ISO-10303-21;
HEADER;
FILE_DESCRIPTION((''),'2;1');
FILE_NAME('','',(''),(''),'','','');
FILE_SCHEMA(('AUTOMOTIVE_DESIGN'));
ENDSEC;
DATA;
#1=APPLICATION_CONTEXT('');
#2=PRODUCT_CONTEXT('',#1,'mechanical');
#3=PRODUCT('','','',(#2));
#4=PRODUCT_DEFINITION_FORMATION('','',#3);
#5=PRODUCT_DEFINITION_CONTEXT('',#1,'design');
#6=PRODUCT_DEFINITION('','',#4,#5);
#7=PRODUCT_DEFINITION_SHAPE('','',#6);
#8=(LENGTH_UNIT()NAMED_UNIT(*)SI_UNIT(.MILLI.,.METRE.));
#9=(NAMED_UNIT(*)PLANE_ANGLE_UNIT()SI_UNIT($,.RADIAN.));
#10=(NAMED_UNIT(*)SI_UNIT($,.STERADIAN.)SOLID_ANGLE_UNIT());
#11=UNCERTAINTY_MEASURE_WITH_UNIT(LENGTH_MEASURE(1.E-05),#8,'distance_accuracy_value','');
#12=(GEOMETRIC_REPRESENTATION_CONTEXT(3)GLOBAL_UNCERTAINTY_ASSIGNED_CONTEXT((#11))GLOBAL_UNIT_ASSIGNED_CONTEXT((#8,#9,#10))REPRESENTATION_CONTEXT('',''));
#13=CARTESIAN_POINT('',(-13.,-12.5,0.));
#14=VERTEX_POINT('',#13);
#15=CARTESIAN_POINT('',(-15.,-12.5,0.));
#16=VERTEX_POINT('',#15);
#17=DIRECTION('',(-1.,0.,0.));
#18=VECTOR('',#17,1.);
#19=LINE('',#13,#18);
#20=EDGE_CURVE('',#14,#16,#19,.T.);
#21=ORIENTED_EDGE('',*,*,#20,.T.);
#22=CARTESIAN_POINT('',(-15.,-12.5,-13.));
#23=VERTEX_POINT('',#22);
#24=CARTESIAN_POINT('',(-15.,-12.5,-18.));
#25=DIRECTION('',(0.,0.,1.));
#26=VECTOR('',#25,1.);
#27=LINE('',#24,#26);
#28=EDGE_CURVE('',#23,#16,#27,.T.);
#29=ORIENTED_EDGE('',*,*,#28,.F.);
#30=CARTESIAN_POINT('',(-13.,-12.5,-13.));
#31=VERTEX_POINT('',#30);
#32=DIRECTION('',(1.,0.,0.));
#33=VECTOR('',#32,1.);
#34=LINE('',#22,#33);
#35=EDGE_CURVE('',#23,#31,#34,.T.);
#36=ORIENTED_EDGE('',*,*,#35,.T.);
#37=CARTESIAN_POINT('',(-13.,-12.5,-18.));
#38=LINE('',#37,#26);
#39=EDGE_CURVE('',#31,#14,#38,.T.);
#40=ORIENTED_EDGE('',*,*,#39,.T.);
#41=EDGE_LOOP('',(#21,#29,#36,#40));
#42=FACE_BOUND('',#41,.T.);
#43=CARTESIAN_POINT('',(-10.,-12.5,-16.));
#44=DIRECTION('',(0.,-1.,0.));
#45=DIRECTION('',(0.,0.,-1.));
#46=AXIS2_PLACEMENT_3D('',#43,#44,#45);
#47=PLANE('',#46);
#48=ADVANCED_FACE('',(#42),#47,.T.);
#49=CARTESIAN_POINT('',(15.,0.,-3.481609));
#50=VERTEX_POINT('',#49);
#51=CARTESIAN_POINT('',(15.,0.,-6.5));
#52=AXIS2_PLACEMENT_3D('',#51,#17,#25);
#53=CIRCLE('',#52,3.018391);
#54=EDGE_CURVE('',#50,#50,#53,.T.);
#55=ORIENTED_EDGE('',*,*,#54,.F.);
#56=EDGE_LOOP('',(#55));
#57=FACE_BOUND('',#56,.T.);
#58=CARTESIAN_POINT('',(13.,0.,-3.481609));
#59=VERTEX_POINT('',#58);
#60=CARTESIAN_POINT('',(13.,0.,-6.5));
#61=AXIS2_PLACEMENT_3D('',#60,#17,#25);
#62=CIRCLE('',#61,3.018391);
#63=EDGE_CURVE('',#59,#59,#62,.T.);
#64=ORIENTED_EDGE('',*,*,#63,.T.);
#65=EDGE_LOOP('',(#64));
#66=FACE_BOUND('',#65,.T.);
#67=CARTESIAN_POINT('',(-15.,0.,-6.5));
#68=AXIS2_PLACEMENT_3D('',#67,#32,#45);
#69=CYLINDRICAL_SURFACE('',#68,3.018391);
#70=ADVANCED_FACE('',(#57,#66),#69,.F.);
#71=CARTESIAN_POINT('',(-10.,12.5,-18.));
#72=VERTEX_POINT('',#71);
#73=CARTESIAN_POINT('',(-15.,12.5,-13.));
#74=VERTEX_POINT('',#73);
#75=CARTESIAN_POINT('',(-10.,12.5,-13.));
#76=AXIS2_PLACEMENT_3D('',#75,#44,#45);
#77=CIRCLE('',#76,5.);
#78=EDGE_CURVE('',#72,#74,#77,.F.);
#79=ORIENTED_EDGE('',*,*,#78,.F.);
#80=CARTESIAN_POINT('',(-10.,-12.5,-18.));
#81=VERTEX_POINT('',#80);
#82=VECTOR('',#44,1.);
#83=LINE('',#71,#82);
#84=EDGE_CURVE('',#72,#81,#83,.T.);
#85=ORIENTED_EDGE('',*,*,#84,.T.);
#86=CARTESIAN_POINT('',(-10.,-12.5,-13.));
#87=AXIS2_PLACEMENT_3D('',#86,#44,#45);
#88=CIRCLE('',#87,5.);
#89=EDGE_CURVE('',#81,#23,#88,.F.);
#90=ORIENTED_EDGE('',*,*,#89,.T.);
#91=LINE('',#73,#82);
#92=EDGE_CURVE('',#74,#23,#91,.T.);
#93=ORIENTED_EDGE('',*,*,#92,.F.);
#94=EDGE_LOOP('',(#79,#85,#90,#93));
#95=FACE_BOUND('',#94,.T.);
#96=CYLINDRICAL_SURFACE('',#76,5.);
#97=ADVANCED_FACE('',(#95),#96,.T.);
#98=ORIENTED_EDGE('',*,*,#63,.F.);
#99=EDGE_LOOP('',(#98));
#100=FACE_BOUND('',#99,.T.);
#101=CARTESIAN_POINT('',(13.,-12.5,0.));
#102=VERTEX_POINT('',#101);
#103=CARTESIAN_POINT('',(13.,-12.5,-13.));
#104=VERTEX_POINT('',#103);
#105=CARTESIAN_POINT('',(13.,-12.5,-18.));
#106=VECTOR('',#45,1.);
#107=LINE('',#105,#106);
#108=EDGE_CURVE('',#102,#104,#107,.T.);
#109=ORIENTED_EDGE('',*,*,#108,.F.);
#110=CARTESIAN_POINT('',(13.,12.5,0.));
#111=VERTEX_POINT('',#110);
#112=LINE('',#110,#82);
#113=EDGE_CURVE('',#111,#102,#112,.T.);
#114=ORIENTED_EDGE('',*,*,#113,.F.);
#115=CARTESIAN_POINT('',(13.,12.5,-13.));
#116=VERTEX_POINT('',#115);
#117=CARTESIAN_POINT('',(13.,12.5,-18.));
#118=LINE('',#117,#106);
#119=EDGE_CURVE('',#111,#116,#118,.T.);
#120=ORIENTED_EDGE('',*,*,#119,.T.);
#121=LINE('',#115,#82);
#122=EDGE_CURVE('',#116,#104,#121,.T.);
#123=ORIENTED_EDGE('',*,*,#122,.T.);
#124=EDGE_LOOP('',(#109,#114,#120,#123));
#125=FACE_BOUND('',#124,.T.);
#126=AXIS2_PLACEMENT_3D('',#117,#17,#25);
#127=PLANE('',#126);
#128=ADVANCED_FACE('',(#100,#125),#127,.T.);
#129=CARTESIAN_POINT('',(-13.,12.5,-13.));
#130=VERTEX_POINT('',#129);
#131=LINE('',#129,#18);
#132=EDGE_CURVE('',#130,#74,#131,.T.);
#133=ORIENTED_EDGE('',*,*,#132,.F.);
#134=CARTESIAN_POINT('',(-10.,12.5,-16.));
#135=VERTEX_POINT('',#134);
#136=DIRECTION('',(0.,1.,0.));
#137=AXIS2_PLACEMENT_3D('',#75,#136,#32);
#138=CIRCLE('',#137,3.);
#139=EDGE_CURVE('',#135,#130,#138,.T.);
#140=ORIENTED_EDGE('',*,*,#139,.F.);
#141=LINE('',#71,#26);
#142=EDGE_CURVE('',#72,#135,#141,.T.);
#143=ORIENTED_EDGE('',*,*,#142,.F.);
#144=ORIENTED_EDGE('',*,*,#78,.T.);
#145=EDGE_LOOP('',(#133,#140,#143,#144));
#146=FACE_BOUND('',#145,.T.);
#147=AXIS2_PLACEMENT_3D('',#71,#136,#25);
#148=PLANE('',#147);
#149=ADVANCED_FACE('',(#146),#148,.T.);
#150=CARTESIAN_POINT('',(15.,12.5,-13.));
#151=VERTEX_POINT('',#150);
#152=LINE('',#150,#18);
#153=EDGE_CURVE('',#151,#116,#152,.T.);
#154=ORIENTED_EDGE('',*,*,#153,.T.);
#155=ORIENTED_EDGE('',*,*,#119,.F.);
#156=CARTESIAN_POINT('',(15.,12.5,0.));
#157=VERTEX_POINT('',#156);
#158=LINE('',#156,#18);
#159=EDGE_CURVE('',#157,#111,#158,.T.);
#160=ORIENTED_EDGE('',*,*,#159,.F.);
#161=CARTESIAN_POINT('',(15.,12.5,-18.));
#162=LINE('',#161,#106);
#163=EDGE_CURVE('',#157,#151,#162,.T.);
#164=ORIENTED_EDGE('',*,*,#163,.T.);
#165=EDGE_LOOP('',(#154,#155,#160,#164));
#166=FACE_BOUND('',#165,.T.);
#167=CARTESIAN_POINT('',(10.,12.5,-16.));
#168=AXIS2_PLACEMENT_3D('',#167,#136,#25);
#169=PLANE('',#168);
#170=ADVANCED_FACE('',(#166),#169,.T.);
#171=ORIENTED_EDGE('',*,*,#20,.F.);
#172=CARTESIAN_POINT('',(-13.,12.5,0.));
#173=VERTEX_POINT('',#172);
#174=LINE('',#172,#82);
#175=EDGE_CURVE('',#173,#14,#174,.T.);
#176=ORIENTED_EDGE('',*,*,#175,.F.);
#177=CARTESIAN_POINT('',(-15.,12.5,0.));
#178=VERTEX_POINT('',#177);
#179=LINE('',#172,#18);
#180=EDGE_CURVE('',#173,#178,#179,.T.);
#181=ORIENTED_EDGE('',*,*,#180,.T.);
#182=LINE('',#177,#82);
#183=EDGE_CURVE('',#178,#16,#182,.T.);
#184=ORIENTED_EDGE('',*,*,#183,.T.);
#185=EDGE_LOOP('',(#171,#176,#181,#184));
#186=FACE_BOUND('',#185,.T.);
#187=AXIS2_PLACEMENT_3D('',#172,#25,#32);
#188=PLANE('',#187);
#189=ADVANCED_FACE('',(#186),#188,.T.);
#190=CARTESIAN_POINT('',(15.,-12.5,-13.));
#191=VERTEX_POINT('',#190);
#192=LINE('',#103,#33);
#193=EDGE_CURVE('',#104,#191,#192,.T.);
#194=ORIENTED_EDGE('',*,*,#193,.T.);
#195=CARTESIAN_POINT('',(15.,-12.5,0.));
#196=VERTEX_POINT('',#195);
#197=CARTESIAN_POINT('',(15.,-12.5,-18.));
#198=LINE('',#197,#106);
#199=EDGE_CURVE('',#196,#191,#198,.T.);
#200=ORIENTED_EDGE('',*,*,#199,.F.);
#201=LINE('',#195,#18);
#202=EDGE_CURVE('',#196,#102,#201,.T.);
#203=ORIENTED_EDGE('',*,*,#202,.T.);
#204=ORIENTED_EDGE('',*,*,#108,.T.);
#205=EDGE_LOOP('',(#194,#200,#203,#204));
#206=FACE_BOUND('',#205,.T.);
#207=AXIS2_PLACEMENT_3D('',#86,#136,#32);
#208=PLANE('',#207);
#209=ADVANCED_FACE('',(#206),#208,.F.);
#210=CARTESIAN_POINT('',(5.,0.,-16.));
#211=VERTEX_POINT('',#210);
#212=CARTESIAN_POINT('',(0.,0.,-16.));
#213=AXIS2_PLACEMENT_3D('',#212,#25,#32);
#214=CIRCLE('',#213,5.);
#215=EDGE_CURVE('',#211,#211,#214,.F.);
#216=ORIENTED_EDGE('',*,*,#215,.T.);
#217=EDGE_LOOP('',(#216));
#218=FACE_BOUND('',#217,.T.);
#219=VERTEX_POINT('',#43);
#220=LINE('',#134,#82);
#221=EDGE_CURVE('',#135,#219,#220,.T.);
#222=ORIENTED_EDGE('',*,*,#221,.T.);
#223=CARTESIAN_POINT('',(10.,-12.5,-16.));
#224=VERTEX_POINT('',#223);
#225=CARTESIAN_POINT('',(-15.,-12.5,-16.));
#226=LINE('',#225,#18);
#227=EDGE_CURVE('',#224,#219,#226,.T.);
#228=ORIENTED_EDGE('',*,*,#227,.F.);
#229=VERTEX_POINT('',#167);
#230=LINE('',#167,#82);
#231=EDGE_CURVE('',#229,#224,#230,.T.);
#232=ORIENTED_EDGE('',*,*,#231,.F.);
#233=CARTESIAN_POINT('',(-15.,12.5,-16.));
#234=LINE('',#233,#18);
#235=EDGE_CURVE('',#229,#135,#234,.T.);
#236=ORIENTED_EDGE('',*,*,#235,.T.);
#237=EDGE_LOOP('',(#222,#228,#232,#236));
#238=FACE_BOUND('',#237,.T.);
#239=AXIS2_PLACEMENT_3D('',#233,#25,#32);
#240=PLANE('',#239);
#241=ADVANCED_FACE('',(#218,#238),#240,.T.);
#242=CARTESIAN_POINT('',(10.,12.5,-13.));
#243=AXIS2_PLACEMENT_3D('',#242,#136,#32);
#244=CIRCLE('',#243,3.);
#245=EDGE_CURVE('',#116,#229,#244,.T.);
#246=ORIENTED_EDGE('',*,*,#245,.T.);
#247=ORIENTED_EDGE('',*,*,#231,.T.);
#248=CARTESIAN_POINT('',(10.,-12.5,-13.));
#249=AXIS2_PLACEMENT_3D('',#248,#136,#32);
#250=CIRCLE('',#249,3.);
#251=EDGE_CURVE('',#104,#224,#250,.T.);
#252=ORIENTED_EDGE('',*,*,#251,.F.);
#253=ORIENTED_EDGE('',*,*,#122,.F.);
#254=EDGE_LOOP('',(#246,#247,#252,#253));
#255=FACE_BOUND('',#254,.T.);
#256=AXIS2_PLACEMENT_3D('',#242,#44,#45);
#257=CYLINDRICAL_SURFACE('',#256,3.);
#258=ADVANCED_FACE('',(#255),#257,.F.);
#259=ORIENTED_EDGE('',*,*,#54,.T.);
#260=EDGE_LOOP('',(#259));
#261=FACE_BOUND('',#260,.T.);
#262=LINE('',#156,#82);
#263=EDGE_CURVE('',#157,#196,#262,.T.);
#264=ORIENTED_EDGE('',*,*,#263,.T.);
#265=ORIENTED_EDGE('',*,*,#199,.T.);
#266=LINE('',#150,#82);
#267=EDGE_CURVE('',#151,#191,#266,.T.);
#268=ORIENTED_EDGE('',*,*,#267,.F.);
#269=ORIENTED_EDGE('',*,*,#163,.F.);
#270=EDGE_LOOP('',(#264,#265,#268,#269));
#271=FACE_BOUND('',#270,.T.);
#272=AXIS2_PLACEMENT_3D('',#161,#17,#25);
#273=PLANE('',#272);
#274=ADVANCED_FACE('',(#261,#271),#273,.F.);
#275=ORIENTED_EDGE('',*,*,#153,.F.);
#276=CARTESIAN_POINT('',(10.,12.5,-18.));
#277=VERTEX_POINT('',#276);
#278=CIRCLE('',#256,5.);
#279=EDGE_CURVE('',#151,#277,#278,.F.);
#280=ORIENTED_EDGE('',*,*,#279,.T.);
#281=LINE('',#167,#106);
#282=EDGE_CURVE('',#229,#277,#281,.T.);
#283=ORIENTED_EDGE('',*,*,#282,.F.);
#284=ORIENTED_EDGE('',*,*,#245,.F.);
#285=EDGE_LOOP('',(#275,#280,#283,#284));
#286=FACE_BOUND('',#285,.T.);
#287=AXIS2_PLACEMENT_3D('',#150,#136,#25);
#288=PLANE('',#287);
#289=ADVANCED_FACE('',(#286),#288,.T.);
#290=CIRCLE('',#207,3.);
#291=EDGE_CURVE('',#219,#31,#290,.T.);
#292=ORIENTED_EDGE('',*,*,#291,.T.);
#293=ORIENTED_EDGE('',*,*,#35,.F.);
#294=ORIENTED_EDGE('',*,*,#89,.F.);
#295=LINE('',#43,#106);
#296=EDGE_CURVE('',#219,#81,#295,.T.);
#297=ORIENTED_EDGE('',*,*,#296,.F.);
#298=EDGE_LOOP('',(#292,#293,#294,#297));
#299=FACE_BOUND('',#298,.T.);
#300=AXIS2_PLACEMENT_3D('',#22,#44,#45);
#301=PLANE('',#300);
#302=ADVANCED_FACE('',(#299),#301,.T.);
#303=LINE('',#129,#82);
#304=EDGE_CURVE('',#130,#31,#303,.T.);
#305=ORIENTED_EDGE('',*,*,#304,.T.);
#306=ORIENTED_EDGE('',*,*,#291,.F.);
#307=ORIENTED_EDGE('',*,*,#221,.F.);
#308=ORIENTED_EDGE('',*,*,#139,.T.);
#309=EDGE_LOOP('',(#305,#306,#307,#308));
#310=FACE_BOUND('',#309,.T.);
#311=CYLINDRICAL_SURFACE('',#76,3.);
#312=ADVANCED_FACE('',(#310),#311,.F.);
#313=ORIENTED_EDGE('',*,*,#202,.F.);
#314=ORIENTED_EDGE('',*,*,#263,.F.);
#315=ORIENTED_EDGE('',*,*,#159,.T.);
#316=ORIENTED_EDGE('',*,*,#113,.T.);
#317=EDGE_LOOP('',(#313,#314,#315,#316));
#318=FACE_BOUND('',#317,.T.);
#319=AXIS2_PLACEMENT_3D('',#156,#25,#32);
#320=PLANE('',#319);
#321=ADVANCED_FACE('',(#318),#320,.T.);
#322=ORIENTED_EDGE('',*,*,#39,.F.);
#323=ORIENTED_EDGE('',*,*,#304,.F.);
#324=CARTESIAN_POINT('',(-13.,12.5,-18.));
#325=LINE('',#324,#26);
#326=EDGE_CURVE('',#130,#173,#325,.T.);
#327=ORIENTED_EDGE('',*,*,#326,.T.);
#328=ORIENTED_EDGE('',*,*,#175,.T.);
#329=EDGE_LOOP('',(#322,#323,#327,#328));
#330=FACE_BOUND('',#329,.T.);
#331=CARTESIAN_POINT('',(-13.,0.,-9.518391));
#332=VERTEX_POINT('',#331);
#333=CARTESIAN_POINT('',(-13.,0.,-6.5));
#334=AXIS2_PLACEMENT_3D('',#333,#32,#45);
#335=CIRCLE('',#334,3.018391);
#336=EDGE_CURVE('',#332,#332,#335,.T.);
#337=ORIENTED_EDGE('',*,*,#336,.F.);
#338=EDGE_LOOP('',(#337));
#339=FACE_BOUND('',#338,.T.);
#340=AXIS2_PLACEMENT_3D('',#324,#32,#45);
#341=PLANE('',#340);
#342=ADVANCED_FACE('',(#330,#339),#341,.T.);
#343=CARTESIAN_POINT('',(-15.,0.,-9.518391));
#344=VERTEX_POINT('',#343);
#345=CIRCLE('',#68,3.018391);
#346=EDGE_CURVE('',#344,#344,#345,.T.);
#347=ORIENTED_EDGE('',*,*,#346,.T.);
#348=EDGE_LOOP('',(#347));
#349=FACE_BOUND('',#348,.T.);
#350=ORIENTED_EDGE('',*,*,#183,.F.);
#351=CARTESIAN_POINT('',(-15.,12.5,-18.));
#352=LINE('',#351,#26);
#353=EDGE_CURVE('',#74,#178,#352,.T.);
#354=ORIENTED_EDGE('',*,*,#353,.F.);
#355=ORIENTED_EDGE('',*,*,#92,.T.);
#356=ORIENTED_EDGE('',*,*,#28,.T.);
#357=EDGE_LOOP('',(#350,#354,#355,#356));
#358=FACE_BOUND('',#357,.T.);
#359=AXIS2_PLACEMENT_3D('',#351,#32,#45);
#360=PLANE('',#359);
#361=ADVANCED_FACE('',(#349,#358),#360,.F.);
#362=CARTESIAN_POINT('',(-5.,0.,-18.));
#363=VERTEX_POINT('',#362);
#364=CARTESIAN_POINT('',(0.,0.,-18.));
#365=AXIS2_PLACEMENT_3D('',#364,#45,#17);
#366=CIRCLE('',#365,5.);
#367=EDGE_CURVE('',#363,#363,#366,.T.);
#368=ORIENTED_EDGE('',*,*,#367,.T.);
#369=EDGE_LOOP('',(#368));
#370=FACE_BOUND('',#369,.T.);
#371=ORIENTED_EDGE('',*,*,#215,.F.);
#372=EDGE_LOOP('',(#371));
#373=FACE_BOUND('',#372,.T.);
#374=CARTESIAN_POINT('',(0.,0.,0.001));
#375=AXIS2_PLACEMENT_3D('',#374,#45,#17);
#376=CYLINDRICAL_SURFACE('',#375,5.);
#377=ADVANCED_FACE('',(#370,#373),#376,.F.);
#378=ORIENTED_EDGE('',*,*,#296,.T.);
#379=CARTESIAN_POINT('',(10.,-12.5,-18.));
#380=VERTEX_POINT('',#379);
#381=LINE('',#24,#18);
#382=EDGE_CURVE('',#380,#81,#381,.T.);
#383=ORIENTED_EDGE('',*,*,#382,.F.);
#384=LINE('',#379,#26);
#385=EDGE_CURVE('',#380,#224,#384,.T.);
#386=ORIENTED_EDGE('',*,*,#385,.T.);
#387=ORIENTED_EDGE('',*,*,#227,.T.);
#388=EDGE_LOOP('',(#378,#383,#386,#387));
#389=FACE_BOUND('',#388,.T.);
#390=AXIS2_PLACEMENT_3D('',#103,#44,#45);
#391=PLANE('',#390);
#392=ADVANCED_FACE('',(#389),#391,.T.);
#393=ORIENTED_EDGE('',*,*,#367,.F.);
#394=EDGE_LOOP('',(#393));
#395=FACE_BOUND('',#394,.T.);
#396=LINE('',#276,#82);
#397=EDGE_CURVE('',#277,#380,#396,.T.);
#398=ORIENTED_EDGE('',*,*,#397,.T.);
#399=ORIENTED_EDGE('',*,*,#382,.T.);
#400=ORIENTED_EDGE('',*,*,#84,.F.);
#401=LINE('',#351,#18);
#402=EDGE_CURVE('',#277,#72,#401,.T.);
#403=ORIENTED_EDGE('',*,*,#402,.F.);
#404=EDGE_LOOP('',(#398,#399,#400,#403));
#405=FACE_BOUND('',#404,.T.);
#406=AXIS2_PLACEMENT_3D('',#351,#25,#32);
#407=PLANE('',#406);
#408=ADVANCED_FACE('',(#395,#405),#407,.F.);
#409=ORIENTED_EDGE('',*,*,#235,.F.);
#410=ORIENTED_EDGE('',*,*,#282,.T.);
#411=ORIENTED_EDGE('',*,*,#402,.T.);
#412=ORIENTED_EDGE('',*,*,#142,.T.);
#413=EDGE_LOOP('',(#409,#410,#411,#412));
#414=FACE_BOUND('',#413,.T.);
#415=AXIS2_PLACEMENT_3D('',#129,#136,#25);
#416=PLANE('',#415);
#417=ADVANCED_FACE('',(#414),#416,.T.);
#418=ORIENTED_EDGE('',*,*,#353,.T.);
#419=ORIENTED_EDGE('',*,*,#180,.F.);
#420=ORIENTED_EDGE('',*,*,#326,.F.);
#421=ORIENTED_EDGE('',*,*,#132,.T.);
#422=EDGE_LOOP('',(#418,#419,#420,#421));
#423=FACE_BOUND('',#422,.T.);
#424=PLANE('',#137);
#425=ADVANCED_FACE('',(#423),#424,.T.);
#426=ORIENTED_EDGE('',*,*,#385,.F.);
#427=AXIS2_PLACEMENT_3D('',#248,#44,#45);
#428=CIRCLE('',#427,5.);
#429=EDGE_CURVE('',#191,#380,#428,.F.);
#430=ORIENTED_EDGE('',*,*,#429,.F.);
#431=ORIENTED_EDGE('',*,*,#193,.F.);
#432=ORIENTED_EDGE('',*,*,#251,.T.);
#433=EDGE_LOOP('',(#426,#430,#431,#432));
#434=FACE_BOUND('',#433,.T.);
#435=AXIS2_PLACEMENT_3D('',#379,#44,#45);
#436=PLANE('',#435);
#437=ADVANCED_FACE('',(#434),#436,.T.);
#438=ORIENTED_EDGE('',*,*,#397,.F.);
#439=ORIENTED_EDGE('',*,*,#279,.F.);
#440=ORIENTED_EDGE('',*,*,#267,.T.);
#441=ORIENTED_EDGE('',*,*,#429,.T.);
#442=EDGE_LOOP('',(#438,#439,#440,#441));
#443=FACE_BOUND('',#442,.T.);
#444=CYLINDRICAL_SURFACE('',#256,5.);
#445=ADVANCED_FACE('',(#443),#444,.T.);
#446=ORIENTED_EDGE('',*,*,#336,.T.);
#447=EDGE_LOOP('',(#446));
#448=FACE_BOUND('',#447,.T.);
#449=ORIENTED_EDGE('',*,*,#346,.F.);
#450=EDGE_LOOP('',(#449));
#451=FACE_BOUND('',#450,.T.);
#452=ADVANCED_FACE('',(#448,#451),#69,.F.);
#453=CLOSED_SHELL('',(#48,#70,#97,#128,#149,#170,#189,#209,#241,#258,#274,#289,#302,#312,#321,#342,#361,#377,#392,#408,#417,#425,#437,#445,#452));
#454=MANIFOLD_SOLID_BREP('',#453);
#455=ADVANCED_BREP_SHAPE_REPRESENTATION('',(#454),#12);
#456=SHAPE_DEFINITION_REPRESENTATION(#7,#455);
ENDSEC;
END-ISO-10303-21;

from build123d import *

# Parameters (mm, degrees)
BASE_FLANGE2_DEPTH      = 12.5
CUT_EXTRUDE2_DEPTH      = 38.151715977
CUT_EXTRUDE2_DEPTH_BACK = 38.151715977
SKETCH11_R              = 3.018390671
CUT_EXTRUDE3_REACH      = 28.557
SKETCH13_R              = 5


# Sheet-metal steps are written as plain solids
with BuildPart() as part:
    # Sketch2 → Base-Flange2 (new, symmetric)
    with BuildSketch(Plane(origin=(0, 0, 0), x_dir=(1, 0, 0), z_dir=(0, 1, 0))):
        with BuildLine():
            Line((-15, 0), (-15, 13))
            ThreePointArc((-15, 13), (-13.535533906, 16.535533906), (-10, 18))
            Line((-10, 18), (10, 18))
            ThreePointArc((10, 18), (13.535533906, 16.535533906), (15, 13))
            Line((15, 13), (15, 0))
            Line((15, 0), (13, 0))
            Line((13, 0), (13, 13))
            ThreePointArc((13, 13), (12.121320344, 15.121320344), (10, 16))
            Line((10, 16), (-10, 16))
            ThreePointArc((-10, 16), (-12.121320344, 15.121320344), (-13, 13))
            Line((-13, 13), (-13, 0))
            Line((-13, 0), (-15, 0))
        make_face()
    extrude(amount=BASE_FLANGE2_DEPTH, both=True)

    # Sketch11 → Cut-Extrude2 (cut, two sides: drawn at the far end of the back side and taken through both)
    with BuildSketch(Plane(origin=(15, 0, 0), x_dir=(0, 0, -1), z_dir=(1, 0, 0)).offset(-CUT_EXTRUDE2_DEPTH_BACK)):
        with Locations(Location((6.5, 0, 0), (0, 0, 180))):
            Circle(SKETCH11_R)
    extrude(amount=CUT_EXTRUDE2_DEPTH + CUT_EXTRUDE2_DEPTH_BACK, mode=Mode.SUBTRACT)

    # Sketch13 → Cut-Extrude3 (cut, up to next)
    with BuildSketch(Plane(origin=(0, 0, -18), x_dir=(-1, 0, 0), z_dir=(0, 0, -1)), mode=Mode.PRIVATE) as cut_extrude3_sk1:
        Circle(SKETCH13_R)
    cut_extrude3_tool1 = extrude(cut_extrude3_sk1.sketch, amount=-CUT_EXTRUDE3_REACH, mode=Mode.PRIVATE) & part.part
    add(cut_extrude3_tool1.solids().sort_by_distance((0, 0, -18))[0], mode=Mode.SUBTRACT)


solid = part.part
